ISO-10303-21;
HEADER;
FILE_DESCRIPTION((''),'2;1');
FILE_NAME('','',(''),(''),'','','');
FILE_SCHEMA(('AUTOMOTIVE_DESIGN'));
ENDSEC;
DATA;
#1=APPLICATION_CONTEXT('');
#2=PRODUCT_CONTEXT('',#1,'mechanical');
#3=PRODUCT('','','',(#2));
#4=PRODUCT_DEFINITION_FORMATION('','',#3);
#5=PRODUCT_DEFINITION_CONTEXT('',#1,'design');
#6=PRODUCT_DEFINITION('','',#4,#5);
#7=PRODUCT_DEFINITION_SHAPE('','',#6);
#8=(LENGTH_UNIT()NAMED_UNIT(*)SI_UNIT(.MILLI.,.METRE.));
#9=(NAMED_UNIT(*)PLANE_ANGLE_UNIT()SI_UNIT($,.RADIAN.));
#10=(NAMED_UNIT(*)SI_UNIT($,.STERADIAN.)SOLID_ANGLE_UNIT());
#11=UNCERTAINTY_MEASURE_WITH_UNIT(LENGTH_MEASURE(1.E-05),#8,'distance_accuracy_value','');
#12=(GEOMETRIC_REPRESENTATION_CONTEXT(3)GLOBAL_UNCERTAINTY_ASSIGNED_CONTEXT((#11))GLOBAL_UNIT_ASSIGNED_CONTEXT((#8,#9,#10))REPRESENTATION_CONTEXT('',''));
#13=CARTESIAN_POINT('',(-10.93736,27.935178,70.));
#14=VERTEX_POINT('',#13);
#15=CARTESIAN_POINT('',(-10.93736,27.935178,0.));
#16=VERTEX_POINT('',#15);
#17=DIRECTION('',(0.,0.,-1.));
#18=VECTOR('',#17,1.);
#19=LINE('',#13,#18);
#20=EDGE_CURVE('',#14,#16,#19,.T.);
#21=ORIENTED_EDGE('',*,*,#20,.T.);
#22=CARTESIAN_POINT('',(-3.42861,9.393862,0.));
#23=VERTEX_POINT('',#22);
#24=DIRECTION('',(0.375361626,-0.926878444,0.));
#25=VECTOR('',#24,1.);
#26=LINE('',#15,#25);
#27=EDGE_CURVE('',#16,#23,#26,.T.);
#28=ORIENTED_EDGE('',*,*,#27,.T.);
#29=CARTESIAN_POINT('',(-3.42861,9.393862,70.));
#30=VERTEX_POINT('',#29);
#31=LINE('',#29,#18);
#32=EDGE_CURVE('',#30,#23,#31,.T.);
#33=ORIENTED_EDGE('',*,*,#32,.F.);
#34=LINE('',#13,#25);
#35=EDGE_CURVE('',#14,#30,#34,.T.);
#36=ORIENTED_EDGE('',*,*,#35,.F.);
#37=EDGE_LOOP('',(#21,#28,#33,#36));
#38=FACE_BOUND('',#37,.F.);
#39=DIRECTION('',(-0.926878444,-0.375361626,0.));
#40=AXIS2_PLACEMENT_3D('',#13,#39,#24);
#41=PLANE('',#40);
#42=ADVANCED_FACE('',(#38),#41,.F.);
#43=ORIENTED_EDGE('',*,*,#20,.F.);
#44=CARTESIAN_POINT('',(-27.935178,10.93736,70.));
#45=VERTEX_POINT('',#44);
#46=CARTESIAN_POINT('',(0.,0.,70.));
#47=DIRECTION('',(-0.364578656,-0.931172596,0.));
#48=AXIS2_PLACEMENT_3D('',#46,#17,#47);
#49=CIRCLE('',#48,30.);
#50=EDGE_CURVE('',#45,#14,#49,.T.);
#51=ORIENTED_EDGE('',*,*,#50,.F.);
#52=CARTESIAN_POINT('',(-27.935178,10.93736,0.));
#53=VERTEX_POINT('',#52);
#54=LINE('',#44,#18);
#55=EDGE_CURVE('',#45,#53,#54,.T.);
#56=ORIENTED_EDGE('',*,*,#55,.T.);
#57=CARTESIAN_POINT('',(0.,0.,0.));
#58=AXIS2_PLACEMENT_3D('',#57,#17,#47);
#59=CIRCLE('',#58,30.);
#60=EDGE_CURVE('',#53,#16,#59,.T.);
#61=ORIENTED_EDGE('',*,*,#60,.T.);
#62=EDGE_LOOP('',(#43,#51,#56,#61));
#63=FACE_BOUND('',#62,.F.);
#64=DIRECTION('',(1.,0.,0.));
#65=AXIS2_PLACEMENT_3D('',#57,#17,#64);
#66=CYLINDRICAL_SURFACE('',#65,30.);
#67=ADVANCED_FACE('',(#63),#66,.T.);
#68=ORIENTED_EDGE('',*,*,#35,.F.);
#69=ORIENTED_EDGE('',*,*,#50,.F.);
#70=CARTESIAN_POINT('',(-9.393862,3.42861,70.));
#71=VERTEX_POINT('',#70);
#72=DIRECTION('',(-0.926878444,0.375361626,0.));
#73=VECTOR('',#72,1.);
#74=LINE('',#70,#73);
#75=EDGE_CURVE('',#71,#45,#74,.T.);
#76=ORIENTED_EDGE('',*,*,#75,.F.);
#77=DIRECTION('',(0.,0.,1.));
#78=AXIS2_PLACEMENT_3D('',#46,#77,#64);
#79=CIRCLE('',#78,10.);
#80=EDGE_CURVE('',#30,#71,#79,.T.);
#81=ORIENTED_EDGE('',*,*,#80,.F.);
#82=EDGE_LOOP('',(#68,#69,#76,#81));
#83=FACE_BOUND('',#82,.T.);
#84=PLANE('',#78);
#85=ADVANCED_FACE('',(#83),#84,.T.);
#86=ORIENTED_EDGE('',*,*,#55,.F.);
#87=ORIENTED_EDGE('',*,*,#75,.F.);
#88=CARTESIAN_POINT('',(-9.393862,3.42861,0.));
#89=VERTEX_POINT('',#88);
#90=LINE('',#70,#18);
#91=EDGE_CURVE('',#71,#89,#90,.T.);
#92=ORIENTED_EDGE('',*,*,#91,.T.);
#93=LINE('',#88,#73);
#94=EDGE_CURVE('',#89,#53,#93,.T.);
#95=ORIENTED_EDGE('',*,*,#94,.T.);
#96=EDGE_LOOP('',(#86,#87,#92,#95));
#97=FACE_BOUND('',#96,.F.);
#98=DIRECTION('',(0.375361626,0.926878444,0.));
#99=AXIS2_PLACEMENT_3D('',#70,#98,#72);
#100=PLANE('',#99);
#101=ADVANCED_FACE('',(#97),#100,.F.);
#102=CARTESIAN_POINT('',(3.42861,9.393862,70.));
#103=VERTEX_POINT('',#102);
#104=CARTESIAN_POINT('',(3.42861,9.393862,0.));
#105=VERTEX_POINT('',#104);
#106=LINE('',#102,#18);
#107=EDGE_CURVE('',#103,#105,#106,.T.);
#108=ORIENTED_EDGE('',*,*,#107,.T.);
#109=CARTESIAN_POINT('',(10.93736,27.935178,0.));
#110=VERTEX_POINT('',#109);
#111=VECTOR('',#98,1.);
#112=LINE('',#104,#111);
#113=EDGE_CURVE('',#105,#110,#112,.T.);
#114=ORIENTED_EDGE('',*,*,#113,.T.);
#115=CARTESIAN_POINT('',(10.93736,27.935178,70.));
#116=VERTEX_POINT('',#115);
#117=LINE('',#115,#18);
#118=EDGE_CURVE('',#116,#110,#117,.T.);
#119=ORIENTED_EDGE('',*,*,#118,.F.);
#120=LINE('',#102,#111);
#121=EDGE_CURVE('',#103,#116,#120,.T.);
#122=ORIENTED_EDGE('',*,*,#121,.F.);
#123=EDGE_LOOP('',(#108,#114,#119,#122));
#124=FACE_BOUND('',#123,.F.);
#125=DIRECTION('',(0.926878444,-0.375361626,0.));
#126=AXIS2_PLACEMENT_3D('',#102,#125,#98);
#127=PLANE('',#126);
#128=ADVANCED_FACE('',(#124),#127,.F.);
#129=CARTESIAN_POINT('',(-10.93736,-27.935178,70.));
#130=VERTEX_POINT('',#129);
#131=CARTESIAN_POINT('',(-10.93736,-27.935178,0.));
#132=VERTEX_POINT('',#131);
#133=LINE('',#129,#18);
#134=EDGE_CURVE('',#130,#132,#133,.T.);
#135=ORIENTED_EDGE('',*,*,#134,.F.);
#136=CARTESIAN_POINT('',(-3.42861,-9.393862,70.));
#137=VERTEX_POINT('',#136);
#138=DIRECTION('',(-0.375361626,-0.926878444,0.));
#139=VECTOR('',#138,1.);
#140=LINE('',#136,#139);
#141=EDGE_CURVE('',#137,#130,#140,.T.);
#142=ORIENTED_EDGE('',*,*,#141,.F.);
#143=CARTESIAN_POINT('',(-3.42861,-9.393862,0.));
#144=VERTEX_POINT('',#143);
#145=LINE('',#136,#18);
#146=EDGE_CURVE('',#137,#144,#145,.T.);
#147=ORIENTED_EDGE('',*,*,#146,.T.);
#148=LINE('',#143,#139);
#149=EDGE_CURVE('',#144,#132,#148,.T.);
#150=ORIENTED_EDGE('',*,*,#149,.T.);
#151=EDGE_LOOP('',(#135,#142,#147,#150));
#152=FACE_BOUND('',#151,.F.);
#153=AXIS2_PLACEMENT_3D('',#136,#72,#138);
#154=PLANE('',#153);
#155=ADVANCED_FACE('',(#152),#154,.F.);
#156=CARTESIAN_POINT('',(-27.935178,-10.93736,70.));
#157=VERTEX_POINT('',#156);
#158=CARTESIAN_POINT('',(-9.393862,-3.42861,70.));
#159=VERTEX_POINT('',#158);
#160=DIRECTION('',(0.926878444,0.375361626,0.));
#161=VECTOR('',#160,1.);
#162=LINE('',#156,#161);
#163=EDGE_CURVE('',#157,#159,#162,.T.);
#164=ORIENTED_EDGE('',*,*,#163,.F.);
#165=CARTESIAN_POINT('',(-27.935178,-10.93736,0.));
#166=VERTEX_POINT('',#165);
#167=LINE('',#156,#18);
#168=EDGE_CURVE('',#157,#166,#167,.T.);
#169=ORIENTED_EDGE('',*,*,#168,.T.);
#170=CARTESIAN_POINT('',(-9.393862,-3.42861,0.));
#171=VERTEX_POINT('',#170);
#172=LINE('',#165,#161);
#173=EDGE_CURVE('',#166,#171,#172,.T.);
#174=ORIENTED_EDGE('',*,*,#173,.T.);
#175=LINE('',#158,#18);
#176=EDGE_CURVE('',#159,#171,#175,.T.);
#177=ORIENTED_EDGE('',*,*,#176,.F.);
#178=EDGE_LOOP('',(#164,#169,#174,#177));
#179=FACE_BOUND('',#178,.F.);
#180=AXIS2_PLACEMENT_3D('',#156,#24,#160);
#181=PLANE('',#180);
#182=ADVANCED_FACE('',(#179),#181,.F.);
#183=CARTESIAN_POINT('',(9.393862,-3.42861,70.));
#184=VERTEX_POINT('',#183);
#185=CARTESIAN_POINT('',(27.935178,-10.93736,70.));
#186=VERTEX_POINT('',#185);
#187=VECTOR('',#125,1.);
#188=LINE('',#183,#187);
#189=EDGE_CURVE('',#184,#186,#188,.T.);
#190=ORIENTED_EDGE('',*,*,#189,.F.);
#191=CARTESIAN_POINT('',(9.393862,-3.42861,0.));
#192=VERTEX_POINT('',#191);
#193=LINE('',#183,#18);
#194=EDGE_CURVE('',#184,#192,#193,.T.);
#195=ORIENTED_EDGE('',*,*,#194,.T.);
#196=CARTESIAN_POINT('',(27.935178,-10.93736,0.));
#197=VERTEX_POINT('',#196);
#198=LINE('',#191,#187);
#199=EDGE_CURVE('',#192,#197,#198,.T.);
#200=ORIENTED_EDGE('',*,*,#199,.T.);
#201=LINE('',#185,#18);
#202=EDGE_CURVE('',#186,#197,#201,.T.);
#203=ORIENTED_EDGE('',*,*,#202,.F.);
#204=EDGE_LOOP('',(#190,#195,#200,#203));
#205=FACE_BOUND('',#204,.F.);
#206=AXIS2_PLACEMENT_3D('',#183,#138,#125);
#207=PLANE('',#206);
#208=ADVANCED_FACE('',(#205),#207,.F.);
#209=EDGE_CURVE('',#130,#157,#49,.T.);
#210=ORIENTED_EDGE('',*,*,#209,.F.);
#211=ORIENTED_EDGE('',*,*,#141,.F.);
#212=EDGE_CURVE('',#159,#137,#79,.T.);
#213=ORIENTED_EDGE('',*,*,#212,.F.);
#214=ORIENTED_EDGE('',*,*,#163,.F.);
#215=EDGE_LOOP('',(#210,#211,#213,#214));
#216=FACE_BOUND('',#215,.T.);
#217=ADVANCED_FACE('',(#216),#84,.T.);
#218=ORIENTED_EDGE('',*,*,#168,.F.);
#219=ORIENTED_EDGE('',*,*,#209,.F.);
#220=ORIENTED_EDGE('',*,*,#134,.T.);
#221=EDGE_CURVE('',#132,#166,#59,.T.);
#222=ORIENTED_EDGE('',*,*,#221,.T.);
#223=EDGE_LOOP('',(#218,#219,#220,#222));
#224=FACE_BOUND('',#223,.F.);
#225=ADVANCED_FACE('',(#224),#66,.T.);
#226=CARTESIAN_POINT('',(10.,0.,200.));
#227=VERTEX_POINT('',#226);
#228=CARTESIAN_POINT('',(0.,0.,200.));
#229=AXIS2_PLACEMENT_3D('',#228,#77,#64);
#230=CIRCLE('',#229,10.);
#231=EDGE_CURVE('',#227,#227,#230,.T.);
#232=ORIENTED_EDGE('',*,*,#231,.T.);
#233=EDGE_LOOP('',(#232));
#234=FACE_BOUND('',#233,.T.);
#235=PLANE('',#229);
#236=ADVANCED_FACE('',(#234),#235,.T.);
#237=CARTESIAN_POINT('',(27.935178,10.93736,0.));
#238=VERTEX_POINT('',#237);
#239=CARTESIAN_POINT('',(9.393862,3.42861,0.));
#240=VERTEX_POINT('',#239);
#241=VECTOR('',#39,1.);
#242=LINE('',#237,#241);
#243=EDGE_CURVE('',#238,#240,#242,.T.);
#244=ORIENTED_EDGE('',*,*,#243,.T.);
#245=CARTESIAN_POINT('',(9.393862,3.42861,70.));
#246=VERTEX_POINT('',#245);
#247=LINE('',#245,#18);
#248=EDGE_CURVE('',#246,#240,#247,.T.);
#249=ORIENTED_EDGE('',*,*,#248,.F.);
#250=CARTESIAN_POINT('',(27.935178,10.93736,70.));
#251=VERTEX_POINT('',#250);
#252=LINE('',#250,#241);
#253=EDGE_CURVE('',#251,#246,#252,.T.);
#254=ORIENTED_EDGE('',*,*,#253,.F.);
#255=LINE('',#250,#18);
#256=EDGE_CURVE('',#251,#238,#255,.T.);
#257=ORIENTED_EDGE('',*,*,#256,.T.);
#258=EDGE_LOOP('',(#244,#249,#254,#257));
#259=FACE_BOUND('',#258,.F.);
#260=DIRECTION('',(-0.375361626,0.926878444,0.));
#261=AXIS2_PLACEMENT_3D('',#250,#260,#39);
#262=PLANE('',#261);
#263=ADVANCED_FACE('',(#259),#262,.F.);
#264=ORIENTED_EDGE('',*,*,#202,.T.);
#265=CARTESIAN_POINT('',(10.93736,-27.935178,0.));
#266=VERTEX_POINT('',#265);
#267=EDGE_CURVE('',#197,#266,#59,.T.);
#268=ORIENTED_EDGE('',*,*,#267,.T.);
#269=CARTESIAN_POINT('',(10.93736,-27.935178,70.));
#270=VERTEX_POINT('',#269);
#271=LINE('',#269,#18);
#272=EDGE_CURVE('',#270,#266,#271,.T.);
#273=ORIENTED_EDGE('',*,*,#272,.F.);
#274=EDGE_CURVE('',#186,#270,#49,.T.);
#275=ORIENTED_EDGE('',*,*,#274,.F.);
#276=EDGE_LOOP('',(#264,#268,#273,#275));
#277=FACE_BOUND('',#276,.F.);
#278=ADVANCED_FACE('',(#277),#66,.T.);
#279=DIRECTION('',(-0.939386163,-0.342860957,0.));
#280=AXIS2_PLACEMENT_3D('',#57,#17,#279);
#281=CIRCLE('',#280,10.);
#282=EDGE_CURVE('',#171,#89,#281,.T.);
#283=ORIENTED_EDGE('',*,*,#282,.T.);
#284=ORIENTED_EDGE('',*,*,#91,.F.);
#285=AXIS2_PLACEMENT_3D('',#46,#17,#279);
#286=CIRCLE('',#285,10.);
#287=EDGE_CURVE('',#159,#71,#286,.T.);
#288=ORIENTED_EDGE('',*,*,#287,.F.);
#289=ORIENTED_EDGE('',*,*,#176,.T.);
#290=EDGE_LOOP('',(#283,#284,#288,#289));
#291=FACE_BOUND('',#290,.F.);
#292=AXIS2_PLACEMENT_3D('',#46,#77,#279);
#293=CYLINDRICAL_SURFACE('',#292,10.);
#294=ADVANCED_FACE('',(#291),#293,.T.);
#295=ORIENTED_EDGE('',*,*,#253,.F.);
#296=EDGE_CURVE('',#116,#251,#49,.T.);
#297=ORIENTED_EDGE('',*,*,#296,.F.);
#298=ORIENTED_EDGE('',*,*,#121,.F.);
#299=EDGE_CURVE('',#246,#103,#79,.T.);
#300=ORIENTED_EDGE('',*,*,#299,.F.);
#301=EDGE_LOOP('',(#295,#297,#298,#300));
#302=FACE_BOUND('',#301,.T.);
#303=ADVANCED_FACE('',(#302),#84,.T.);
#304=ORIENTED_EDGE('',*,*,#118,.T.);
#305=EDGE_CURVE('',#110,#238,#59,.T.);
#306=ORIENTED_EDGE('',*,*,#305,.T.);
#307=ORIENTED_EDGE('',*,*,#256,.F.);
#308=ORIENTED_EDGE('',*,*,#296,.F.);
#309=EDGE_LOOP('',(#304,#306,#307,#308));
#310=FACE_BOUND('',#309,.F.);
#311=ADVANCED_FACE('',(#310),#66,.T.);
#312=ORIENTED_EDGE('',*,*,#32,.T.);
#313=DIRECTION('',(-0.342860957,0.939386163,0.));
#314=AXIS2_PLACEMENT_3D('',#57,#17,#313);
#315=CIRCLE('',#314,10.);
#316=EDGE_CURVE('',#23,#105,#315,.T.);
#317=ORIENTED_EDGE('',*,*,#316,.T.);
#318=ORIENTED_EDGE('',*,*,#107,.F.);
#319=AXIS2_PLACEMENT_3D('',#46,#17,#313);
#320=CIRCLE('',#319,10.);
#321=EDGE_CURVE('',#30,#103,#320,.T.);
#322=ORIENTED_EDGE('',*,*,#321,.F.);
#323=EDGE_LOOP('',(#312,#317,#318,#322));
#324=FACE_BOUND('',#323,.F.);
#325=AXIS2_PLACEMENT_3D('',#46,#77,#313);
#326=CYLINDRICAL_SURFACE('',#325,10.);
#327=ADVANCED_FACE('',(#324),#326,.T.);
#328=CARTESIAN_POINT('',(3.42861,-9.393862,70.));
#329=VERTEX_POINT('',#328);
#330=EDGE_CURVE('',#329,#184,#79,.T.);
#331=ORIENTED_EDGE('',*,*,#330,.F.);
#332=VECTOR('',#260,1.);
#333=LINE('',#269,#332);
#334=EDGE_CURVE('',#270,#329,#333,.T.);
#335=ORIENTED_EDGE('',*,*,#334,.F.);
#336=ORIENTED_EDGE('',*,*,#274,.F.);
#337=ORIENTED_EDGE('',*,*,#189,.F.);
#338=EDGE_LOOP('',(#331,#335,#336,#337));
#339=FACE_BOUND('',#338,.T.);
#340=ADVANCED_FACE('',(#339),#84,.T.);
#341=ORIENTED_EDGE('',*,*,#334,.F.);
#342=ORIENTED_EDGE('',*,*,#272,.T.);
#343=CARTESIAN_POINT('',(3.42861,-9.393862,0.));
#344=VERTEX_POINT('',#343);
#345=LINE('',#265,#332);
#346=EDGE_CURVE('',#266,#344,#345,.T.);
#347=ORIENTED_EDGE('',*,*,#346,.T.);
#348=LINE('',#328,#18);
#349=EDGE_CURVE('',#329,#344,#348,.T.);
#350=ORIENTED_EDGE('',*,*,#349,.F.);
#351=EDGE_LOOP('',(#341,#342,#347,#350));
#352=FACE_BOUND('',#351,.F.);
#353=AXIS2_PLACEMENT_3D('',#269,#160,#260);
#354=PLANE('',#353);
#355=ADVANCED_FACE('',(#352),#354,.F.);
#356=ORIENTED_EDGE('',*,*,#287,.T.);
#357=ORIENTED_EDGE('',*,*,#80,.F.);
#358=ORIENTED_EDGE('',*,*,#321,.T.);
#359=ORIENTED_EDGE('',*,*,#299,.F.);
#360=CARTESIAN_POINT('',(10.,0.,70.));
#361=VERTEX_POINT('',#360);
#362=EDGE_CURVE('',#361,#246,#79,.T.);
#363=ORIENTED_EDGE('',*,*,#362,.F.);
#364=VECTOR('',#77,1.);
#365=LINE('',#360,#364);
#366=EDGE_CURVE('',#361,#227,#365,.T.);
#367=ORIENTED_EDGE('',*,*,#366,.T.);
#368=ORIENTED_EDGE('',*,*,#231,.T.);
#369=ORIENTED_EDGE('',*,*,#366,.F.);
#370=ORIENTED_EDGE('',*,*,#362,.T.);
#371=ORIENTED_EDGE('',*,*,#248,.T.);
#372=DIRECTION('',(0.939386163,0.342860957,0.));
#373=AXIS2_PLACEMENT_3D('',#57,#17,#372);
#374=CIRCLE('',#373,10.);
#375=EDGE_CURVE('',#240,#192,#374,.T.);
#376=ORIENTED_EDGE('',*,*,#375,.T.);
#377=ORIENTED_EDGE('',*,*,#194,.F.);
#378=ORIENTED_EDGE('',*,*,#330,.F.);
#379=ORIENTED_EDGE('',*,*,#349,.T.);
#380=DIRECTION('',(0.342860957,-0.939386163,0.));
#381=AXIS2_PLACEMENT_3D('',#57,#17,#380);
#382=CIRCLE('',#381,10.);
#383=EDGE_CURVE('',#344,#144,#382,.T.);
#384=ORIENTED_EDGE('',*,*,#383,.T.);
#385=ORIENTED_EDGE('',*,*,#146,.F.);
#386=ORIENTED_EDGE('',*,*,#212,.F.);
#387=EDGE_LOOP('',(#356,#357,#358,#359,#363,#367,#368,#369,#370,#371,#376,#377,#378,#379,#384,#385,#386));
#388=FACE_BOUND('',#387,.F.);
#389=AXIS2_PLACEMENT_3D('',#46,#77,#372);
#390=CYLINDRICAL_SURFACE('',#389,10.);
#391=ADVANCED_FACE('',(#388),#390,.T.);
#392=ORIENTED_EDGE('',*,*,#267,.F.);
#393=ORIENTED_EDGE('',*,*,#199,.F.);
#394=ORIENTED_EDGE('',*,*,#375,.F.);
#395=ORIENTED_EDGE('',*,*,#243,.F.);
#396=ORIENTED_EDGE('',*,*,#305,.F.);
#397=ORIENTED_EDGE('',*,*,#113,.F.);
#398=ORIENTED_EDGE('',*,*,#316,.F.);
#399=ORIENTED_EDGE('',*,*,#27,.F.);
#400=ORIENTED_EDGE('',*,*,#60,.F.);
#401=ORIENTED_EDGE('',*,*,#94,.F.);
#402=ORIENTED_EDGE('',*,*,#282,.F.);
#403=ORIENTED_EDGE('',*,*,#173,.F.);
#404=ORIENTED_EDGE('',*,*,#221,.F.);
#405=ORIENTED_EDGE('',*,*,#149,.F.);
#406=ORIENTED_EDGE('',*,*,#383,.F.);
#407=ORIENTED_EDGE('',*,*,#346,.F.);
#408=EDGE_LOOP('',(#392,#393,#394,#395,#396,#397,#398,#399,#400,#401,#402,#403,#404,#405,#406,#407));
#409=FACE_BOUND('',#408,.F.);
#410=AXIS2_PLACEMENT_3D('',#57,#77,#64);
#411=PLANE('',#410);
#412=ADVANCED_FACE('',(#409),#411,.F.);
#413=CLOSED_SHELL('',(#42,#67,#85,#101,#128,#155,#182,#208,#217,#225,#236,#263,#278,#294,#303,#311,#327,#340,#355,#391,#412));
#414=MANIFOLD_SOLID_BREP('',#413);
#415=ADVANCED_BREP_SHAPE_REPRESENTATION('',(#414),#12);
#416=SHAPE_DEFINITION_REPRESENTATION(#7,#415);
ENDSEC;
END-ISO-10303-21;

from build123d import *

# Parameters (mm, degrees)
F0_R            = 30
F0_R_2          = 10
F1_DEPTH        = 70
F2_R            = 10
F3_DEPTH        = 130
F3_DEPTH_BACK   = 70
F5_DEPTH        = 70
F5_COPIES_COUNT = 4


# Not quite as in the source:
# - a pattern or mirror of a feature is missing from the dataset's text; its kind, count and spacing are read off the source's solid


with BuildPart() as f1:
    # F0 (on Top) → F1 (new body)
    with BuildSketch(Plane.XY):
        Circle(F0_R)
        Circle(F0_R_2, mode=Mode.SUBTRACT)
    extrude(amount=F1_DEPTH)

    # F2 (on face) → F3 (join, two sides)
    with BuildSketch(Plane.XY.offset(70)) as f3_sk:
        Circle(F2_R)
    extrude(amount=F3_DEPTH)
    extrude(f3_sk.sketch, amount=-F3_DEPTH_BACK)

    # F4 (on face) → F5 (cut, through all)
    with BuildSketch(Plane.XY.offset(70)):
        with BuildLine():
            ThreePointArc((3.4286095737, -9.3938616336), (0, -10), (-3.4286095737, -9.3938616336))
            Line((-3.4286095737, -9.3938616336), (-10.9373596855, -27.9351778786))
            ThreePointArc((-10.9373596855, -27.9351778786), (0, -30), (10.9373596855, -27.9351778786))
            Line((10.9373596855, -27.9351778786), (3.4286095737, -9.3938616336))
        make_face()
    f5 = extrude(amount=-F5_DEPTH, mode=Mode.SUBTRACT)

    # F5_copies: F5 ×4 about axis
    f5_copies_axis = Axis((0, 0, 0), (0, 0, 1))
    for i in range(1, F5_COPIES_COUNT):
        add(f5.rotate(f5_copies_axis, i * 360 / F5_COPIES_COUNT), mode=Mode.SUBTRACT)


solid = f1.part
